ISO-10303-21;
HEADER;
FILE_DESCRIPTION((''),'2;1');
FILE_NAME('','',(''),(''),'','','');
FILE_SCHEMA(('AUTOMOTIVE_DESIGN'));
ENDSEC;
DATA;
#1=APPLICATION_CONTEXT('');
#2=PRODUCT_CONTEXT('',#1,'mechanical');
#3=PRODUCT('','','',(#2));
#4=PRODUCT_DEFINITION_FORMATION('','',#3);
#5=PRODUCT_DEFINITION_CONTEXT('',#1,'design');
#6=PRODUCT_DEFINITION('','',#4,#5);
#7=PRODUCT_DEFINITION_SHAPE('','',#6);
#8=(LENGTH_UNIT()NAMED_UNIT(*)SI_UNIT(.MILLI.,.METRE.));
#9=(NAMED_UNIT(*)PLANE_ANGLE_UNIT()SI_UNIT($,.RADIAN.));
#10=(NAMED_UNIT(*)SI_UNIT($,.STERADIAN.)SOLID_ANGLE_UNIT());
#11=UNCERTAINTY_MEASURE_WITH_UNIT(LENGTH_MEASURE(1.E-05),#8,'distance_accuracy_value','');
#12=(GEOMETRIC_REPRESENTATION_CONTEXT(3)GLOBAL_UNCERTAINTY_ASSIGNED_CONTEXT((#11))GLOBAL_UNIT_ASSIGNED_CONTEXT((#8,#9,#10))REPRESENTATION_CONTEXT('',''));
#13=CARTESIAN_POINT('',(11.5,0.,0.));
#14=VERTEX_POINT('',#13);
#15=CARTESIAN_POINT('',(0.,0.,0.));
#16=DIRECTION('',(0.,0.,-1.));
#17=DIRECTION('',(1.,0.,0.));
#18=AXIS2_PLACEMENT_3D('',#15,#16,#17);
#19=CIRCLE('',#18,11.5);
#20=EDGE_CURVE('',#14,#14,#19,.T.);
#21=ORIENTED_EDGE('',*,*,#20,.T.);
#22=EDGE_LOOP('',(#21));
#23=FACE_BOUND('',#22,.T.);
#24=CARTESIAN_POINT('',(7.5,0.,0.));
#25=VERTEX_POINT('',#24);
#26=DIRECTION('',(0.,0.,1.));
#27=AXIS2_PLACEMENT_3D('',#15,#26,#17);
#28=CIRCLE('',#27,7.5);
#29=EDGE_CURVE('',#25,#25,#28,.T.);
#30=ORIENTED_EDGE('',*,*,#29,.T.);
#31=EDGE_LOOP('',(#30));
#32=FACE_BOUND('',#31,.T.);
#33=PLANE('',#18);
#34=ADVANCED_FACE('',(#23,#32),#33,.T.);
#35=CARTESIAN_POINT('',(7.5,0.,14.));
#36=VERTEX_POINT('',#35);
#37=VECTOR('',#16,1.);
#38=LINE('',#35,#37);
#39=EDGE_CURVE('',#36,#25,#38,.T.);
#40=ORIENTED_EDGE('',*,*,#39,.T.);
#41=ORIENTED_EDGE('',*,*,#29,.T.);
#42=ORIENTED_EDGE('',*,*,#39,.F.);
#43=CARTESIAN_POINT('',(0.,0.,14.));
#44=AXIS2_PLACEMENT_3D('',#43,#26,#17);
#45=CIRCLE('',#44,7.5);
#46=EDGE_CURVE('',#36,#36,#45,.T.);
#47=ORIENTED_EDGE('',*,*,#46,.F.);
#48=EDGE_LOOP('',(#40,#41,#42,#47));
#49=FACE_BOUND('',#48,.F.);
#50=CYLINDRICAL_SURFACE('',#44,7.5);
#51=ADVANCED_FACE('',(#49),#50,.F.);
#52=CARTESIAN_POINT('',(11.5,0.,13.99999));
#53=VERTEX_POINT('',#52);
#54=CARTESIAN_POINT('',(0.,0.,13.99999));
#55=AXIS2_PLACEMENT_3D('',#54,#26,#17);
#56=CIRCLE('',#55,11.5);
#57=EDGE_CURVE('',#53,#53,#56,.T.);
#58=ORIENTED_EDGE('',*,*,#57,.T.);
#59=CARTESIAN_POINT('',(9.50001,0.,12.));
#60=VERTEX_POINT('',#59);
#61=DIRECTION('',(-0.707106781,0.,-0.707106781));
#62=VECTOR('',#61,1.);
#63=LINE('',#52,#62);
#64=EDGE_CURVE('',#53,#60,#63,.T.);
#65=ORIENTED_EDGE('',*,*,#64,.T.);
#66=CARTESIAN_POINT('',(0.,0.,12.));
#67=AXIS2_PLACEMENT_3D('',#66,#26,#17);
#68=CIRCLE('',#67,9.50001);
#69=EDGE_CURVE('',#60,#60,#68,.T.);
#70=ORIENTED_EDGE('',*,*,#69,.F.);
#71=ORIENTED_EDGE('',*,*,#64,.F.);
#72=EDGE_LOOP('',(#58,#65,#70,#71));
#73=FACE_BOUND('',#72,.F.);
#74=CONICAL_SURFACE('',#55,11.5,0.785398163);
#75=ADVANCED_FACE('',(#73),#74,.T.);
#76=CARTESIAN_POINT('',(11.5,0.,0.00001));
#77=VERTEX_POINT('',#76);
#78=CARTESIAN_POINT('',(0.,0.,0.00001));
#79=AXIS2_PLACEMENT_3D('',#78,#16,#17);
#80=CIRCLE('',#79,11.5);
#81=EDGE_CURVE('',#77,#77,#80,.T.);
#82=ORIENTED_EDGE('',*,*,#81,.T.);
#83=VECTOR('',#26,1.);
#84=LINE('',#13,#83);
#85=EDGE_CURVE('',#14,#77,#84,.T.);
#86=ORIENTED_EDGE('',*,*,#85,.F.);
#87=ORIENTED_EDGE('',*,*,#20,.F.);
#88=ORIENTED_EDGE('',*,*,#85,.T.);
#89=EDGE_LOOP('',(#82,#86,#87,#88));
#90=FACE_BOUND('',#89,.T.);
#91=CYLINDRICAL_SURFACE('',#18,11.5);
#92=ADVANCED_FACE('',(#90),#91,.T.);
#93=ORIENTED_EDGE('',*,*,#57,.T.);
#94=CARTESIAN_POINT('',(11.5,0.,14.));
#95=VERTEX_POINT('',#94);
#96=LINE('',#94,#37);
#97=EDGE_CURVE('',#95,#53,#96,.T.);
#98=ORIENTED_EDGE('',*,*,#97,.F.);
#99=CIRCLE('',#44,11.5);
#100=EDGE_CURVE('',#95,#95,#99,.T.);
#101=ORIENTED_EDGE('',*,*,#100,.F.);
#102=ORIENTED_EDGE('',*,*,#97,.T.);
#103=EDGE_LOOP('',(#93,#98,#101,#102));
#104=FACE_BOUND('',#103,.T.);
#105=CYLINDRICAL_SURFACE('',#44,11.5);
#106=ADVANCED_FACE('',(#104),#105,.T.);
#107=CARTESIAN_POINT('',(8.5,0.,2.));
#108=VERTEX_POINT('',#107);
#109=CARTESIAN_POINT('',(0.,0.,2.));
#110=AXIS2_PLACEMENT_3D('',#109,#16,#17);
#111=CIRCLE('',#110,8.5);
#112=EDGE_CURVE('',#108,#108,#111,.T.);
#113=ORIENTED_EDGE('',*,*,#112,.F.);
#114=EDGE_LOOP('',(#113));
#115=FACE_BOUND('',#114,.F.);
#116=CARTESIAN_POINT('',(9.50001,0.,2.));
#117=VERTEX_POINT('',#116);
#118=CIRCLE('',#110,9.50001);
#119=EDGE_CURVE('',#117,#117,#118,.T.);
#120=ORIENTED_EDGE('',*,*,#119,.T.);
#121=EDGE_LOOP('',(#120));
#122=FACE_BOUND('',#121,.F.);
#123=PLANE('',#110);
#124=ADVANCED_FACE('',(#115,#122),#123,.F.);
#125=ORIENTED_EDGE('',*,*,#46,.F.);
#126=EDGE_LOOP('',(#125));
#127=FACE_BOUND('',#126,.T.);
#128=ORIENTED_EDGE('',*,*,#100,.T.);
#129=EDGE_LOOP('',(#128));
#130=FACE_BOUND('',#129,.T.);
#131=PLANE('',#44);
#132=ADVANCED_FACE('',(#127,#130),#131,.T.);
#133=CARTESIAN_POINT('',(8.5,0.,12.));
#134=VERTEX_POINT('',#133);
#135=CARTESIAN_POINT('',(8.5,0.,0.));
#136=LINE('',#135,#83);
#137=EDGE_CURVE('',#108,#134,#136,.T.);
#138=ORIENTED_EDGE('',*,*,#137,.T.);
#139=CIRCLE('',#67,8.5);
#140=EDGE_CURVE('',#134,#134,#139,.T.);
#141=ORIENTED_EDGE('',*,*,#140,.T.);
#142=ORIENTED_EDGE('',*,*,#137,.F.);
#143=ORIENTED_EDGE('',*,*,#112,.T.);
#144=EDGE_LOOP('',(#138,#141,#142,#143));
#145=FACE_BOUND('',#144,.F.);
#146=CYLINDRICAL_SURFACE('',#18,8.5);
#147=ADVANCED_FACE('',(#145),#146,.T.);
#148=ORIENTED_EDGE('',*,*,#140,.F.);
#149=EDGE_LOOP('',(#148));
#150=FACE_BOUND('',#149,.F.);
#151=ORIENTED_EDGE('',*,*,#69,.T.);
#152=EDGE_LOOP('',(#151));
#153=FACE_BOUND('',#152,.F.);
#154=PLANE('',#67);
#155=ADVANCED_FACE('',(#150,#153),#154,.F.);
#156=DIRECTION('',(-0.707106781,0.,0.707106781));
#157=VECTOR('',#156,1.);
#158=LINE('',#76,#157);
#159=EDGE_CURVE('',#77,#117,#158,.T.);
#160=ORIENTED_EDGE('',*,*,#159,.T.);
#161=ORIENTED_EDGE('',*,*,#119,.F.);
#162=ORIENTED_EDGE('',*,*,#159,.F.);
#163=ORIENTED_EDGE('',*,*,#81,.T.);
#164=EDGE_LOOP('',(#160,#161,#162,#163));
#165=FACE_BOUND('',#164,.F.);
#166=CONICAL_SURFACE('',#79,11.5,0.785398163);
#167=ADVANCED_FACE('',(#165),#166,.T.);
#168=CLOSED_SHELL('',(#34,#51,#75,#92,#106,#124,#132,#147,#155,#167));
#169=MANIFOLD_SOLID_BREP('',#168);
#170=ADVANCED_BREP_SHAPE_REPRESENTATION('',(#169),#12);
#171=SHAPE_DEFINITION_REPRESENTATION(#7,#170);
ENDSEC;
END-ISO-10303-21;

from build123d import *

# Parameters (mm, degrees)
F0_R     = 8.5
F1_DEPTH = 14
F2_R     = 11.5
F2_R_2   = 8.5
F4_DEPTH = 2
F5_SIZE  = 1.99999
F3_R     = 11.5
F3_R_2   = 8.5
F6_DEPTH = 2
F7_SIZE  = 1.99999
F8_R     = 7.5
F9_DEPTH = 14.001


# Not quite as in the source:
# - a fillet or chamfer is up to 0.001 mm smaller than in the source, because OpenCascade refuses the exact size


with BuildPart() as f1:
    # F0 (on Top) → F1 (new body)
    with BuildSketch(Plane.XY):
        Circle(F0_R)
    extrude(amount=F1_DEPTH)

    # F2 (on face) → F4 (join)
    with BuildSketch(Plane.XY.offset(14)):
        Circle(F2_R)
        Circle(F2_R_2, mode=Mode.SUBTRACT)
    extrude(amount=-F4_DEPTH)

    # F5 (size 2 in the source; OpenCascade refuses exactly that, so slightly less here)
    f5_edges = [f1.edges().sort_by_distance(p)[0] for p in [
        (-11.5, 0, 12),
    ]]
    chamfer(f5_edges, length=F5_SIZE)

    # F3 (on face) → F6 (join)
    with BuildSketch(Plane(origin=(0, 0, 0), x_dir=(1, 0, 0), z_dir=(0, 0, -1))):
        Circle(F3_R)
        Circle(F3_R_2, mode=Mode.SUBTRACT)
    extrude(amount=-F6_DEPTH)

    # F7 (size 2 in the source; OpenCascade refuses exactly that, so slightly less here)
    f7_edges = [f1.edges().sort_by_distance(p)[0] for p in [
        (-11.5, 0, 2),
    ]]
    chamfer(f7_edges, length=F7_SIZE)

    # F8 (on face) → F9 (cut, through all)
    with BuildSketch(Plane.XY.offset(14)):
        Circle(F8_R)
    extrude(amount=-F9_DEPTH, mode=Mode.SUBTRACT)


solid = f1.part
